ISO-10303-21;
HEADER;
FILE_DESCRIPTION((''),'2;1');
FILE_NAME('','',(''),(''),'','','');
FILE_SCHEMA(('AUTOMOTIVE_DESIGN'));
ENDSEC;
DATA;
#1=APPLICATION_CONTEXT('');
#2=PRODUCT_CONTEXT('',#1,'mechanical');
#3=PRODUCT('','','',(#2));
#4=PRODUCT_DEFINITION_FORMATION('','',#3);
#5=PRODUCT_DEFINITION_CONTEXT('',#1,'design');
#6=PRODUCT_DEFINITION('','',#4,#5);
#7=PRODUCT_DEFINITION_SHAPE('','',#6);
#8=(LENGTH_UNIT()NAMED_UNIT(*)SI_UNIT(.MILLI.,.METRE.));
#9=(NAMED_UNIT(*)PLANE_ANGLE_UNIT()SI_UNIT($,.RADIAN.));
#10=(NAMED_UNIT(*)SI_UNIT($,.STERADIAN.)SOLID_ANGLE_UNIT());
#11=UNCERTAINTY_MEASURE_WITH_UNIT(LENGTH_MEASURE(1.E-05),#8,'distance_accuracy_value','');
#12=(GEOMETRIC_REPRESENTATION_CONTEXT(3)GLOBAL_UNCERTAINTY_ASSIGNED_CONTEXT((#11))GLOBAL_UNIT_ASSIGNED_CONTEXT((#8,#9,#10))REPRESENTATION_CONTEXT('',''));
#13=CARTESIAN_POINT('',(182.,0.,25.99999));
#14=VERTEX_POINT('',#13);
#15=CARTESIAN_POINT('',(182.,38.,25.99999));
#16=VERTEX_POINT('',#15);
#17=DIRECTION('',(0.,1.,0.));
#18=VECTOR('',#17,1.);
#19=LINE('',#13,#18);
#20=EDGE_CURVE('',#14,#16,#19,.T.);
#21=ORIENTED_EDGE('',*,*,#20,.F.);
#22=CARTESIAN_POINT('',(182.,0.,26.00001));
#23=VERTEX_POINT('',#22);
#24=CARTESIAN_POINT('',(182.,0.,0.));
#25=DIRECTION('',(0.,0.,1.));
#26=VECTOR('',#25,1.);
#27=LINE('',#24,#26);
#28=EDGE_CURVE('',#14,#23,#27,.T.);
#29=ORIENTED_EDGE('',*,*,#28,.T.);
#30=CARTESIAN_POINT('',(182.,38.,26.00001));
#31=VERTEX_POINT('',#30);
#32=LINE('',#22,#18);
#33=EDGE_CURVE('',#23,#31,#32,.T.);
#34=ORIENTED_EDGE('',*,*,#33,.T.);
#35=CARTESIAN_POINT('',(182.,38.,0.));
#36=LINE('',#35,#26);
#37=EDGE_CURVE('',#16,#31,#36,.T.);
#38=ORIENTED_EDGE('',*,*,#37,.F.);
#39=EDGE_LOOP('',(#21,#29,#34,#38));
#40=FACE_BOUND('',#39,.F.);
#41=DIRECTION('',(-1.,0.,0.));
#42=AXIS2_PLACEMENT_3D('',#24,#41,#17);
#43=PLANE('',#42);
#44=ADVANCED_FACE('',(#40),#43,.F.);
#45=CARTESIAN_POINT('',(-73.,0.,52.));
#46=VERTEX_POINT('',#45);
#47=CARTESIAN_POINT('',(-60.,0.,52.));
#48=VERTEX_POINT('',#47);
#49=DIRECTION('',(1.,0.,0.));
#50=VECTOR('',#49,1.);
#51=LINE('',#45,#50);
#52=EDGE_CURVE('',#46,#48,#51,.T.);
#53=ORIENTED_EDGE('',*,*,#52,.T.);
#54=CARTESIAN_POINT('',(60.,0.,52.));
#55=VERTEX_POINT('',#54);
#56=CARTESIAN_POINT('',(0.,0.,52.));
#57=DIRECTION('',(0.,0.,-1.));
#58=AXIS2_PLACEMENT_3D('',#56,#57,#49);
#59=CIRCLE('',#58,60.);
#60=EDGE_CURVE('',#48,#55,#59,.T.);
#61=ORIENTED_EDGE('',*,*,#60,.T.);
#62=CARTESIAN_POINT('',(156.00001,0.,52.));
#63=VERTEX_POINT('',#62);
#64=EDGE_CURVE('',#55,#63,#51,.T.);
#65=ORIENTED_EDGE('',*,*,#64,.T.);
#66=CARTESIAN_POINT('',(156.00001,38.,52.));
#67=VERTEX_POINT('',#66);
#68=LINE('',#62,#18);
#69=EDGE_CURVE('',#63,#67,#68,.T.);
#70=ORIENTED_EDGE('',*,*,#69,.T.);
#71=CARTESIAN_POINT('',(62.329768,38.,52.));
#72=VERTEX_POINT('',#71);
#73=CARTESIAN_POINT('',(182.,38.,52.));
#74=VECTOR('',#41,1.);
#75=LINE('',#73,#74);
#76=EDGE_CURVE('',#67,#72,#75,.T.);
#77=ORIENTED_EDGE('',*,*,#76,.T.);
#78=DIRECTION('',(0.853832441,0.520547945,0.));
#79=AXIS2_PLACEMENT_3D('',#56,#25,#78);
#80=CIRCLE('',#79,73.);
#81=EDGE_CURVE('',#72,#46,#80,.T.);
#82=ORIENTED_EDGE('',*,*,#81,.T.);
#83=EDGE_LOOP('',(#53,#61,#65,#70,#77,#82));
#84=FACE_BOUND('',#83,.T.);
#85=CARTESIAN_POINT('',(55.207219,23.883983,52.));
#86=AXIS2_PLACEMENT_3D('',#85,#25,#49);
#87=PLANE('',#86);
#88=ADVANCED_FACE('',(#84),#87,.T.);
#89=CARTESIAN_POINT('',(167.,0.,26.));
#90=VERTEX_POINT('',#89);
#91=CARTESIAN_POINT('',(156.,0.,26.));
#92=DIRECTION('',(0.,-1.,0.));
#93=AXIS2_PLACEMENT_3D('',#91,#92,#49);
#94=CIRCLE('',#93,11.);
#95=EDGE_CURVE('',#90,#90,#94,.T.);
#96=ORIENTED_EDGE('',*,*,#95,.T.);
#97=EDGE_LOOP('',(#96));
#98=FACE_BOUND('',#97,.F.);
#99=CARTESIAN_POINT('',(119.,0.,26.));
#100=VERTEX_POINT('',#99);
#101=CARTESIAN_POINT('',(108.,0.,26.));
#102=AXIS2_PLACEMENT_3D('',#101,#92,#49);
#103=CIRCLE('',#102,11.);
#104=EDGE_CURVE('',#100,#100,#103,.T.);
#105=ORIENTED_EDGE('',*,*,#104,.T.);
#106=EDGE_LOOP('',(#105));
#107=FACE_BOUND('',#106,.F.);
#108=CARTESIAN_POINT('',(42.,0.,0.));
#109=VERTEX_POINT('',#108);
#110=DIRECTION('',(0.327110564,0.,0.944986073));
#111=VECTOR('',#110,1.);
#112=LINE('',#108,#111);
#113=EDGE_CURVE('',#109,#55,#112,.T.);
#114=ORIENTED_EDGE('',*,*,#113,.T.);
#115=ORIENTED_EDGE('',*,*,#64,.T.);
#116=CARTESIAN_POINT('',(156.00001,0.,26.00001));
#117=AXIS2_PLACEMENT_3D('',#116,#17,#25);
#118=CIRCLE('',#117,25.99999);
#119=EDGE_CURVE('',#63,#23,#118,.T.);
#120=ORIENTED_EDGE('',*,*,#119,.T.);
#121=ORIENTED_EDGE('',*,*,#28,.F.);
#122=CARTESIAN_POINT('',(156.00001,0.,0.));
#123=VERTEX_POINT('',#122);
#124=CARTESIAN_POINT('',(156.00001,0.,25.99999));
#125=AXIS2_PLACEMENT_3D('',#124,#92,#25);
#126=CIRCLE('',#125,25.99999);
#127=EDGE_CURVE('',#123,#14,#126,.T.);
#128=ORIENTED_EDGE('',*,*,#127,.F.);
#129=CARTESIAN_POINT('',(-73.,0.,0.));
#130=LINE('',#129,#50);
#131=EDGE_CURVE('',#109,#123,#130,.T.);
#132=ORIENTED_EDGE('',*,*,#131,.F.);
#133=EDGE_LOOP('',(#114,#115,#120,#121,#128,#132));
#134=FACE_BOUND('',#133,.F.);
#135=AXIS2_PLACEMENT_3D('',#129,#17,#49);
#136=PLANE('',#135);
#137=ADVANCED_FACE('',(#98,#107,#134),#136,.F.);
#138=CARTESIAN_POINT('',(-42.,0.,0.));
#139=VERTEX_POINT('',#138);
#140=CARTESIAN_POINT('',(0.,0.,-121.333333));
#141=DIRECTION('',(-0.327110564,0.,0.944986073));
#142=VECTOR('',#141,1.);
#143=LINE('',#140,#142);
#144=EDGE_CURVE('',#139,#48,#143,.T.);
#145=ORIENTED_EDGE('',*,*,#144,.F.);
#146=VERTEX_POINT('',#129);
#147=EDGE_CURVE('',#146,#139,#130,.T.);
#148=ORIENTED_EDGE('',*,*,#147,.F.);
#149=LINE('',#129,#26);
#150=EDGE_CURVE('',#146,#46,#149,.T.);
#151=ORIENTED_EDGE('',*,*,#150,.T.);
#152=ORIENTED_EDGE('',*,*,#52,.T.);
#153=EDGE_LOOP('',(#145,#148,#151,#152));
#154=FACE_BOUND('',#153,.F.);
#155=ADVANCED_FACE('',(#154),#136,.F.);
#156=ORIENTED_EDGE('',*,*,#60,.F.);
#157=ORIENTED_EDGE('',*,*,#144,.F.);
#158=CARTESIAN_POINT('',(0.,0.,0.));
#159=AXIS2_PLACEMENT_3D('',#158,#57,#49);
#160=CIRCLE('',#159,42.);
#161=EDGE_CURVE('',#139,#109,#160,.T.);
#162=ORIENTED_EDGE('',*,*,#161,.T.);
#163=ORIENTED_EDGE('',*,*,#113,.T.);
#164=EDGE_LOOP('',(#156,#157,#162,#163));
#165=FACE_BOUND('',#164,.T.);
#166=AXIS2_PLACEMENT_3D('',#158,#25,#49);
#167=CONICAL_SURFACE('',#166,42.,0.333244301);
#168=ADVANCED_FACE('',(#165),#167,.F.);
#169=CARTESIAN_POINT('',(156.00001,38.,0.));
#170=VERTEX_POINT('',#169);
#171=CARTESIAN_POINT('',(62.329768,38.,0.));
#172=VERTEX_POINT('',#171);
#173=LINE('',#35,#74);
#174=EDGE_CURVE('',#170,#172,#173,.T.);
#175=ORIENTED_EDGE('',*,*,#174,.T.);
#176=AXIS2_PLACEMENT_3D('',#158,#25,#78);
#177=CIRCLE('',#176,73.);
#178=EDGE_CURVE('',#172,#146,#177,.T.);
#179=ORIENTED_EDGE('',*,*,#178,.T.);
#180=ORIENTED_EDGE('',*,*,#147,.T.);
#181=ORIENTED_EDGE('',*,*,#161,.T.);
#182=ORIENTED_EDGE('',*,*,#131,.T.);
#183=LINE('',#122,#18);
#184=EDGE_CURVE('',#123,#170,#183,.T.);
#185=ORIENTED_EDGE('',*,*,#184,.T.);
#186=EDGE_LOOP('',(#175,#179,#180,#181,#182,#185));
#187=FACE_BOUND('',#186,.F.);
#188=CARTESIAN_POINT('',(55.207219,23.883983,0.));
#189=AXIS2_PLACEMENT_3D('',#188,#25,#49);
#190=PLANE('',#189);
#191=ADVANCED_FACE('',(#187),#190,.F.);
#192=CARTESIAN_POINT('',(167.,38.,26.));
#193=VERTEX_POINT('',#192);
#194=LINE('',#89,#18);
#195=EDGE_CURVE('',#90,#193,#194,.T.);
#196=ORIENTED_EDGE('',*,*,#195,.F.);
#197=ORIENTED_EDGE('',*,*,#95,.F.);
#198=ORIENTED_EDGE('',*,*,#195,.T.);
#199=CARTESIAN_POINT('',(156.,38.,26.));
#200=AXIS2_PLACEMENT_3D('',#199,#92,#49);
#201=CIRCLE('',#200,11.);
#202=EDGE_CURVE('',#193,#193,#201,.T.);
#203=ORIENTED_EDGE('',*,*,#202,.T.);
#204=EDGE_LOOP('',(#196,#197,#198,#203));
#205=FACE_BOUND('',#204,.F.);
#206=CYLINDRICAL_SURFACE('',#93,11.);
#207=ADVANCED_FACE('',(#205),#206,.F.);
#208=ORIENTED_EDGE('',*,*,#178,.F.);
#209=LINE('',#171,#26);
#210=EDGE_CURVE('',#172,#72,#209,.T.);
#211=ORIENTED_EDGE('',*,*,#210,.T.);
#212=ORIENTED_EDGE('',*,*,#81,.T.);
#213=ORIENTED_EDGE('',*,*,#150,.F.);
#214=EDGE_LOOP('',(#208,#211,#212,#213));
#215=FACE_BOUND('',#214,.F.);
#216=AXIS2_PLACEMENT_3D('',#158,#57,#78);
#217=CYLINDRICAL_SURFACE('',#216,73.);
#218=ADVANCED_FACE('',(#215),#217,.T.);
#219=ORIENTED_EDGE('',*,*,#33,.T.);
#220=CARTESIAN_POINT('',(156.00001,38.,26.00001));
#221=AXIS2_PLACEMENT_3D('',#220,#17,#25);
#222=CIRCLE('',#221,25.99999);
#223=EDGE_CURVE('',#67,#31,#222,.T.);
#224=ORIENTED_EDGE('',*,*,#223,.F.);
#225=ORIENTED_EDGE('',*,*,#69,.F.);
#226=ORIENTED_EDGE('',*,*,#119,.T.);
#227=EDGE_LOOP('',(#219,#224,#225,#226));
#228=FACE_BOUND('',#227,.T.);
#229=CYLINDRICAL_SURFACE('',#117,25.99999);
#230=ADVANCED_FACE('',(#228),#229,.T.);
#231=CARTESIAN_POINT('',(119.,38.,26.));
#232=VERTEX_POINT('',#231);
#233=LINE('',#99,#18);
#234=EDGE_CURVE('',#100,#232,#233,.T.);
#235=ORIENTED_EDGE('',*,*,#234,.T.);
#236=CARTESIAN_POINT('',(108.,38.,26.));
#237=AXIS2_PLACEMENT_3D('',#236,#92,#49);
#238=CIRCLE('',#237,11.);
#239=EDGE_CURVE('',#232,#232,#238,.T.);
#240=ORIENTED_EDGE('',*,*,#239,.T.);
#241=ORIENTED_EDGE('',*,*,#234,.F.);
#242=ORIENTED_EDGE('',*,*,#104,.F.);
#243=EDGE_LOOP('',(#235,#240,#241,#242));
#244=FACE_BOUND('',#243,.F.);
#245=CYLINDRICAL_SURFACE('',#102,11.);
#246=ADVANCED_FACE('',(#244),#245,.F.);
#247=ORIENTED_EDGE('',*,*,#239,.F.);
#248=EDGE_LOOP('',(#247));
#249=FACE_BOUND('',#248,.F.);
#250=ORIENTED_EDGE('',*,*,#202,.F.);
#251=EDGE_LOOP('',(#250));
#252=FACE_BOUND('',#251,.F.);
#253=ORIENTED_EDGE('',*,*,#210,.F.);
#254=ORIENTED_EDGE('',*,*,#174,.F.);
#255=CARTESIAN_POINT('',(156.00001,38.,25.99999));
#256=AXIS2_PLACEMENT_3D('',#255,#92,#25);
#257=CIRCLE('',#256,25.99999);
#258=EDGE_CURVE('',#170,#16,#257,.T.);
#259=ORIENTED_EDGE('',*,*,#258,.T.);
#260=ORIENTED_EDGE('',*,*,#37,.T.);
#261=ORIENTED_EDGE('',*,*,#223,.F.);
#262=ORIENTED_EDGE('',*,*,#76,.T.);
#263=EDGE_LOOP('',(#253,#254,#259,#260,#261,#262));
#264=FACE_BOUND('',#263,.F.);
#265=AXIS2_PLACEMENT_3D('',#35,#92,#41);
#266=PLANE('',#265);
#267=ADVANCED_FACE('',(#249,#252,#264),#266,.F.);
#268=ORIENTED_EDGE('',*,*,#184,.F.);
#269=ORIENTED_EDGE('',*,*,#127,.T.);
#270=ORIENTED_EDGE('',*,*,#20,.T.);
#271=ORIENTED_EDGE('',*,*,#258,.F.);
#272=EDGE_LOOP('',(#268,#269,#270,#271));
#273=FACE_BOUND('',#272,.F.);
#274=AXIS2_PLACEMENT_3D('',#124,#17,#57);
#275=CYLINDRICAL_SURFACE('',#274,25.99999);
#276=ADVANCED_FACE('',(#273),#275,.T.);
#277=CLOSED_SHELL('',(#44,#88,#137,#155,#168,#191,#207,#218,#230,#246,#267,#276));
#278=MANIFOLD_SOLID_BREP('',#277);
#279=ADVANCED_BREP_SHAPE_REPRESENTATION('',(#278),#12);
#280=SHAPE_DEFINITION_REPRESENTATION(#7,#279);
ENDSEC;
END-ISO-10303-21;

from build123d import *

# Parameters (mm, degrees)
F1_DEPTH = 52
F4_R     = 25.99999
F5_R     = 11
F6_DEPTH = 100


# Not quite as in the source:
# - a fillet or chamfer is up to 0.001 mm smaller than in the source, because OpenCascade refuses the exact size


with BuildPart() as f1:
    # F0 (on Top) → F1 (new body)
    with BuildSketch(Plane.XY):
        with BuildLine():
            ThreePointArc((62.329768169, 38), (-19.7348286497, 70.2818364741), (-73, 0))
            Line((-73, 0), (182, 0))
            Line((182, 0), (182, 38))
            Line((182, 38), (62.329768169, 38))
        make_face()
    extrude(amount=F1_DEPTH)

    # F2 (on face) → F3 (revolve, cut)
    with BuildSketch(Plane.XZ):
        Polygon((60, 52), (0, 52), (0, 0), (42, 0), align=None)
    revolve(axis=Axis((0, 0, 26), (0, 0, -1)), mode=Mode.SUBTRACT)

    # F4 (radius 26 in the source; OpenCascade refuses exactly that, so slightly less here)
    f4_edges = [f1.edges().sort_by_distance(p)[0] for p in [
        (182, 19, 52),
        (182, 19, 0),
    ]]
    fillet(f4_edges, radius=F4_R)

    # F5 (on face) → F6 (cut)
    with BuildSketch(Plane.XZ):
        with Locations((108, 26)):
            Circle(F5_R)
        with Locations((156, 26)):
            Circle(F5_R)
    extrude(amount=-F6_DEPTH, mode=Mode.SUBTRACT)


solid = f1.part
